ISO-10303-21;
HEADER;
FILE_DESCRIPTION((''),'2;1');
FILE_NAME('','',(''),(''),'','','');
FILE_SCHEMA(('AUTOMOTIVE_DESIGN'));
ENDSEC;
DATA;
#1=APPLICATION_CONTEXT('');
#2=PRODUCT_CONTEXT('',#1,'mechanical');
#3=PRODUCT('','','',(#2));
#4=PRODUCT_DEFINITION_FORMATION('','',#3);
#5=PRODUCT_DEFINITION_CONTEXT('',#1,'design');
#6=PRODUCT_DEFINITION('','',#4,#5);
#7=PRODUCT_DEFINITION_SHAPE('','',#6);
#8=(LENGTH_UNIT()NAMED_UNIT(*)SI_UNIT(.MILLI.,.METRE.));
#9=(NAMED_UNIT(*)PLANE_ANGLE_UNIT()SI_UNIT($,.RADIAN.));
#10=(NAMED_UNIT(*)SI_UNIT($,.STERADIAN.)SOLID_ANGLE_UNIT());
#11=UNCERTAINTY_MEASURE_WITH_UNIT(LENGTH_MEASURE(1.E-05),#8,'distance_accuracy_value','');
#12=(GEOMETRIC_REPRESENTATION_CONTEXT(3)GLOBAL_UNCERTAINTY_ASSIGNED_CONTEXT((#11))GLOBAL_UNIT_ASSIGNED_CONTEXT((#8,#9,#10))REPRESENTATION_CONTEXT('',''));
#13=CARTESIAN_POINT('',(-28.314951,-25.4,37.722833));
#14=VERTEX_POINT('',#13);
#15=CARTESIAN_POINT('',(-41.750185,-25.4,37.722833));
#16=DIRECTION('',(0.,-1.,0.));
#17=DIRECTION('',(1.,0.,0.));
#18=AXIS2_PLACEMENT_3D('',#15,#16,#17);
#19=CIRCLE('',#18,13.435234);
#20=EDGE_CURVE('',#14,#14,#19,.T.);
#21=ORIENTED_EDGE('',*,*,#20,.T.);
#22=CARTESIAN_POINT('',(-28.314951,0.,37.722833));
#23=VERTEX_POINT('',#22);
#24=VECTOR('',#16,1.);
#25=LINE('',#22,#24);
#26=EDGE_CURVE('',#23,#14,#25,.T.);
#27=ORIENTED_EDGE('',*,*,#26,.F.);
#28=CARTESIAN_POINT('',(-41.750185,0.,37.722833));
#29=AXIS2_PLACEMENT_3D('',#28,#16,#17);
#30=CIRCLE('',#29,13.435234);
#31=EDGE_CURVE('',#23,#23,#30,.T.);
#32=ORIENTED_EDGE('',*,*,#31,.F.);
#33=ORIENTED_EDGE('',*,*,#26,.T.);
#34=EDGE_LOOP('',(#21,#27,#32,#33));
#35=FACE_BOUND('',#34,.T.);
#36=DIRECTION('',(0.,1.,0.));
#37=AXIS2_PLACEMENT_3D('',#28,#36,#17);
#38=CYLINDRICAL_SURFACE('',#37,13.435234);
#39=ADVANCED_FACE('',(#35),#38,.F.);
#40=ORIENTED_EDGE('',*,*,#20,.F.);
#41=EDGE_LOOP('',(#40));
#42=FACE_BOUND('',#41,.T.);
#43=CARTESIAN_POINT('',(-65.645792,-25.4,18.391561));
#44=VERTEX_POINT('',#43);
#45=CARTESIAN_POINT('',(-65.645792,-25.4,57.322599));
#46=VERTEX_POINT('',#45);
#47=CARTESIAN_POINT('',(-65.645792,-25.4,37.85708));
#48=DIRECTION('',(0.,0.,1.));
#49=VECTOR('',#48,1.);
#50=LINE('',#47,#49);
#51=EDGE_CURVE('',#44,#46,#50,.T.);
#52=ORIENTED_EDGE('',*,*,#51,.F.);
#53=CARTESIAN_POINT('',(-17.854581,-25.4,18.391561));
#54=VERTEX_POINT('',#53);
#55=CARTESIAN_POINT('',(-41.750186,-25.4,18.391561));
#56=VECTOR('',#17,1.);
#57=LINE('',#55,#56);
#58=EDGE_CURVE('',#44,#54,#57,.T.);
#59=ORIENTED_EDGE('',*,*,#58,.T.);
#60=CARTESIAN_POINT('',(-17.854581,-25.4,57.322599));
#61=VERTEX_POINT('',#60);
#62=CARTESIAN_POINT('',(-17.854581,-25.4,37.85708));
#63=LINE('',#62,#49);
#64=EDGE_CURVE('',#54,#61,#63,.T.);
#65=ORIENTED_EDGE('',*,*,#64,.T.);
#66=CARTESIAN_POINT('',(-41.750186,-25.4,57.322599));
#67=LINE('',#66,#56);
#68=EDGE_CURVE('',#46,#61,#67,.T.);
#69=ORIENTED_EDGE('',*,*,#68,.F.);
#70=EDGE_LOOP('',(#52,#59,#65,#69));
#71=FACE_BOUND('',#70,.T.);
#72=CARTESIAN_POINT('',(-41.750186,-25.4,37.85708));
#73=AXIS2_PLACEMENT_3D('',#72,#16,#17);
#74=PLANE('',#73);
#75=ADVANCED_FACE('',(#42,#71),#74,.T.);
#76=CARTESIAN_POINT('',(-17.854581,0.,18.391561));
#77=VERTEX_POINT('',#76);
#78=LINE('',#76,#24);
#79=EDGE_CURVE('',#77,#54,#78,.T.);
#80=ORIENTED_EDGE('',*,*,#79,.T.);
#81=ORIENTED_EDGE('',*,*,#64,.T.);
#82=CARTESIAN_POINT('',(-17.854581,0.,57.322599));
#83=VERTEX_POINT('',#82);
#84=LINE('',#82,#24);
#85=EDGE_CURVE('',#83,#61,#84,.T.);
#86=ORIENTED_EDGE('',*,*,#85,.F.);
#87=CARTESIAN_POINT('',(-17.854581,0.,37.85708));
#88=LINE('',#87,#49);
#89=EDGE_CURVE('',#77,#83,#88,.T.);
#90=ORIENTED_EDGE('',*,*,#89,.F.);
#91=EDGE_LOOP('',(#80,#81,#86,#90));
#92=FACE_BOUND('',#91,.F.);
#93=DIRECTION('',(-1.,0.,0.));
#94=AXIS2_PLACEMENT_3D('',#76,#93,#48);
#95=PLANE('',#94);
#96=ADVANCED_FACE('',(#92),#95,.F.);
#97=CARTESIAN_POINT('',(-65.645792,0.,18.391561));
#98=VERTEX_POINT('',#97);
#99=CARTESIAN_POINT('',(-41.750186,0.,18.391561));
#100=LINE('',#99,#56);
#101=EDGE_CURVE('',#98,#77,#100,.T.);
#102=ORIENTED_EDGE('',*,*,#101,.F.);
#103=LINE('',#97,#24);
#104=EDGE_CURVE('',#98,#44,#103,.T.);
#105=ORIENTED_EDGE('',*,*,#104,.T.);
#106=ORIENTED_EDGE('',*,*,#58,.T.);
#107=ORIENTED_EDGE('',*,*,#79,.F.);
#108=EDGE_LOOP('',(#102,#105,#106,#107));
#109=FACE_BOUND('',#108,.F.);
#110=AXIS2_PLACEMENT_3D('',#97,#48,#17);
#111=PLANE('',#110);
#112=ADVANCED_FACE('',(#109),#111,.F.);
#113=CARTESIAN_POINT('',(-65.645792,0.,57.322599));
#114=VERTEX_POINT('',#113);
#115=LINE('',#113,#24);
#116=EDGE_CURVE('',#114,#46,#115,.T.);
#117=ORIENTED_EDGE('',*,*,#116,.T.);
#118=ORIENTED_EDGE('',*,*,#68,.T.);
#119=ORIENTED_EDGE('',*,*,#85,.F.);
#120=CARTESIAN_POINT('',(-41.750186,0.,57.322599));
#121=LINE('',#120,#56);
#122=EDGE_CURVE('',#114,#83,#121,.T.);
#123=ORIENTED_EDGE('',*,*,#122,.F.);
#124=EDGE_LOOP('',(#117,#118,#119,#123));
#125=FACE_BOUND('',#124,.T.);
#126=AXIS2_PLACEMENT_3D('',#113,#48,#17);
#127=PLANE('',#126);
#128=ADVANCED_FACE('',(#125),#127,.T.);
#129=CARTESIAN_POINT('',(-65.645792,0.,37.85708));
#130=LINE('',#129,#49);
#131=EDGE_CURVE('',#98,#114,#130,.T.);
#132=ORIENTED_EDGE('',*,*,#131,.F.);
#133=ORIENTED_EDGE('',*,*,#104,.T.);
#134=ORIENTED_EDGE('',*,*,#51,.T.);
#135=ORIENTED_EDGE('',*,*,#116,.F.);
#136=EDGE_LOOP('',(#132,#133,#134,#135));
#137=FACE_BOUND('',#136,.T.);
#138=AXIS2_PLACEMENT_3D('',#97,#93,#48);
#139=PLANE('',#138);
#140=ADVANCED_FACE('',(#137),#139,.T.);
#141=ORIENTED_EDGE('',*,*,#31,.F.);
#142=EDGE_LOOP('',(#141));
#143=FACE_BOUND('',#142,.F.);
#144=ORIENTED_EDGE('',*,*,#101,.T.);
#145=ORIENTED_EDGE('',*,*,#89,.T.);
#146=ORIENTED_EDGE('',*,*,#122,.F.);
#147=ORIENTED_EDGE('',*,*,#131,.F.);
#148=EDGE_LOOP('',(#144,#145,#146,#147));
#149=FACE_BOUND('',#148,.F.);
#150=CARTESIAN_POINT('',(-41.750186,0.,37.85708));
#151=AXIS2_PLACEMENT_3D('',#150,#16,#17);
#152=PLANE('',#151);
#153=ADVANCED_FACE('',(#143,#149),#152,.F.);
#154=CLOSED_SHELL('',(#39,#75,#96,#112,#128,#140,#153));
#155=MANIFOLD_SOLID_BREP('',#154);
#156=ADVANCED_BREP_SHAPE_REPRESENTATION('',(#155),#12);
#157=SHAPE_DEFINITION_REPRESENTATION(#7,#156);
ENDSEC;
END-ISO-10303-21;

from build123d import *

# Parameters (mm, degrees)
F0_W     = 47.7912109345
F0_H     = 38.9310382307
F0_R     = 13.4352343475
F1_DEPTH = 25.4


# Not quite as in the source:
# - the program builds the solid bodies; features that only make, move or delete a surface that nothing else refers to are left out


with BuildPart() as f1:
    # F0 (on Front) → F1 (new body)
    with BuildSketch(Plane.XZ):
        with Locations((-41.750186123, 37.8570798784)):
            Rectangle(F0_W, F0_H)
        with Locations((-41.7501851916, 37.7228334546)):
            Circle(F0_R, mode=Mode.SUBTRACT)
    extrude(amount=F1_DEPTH)


solid = f1.part
